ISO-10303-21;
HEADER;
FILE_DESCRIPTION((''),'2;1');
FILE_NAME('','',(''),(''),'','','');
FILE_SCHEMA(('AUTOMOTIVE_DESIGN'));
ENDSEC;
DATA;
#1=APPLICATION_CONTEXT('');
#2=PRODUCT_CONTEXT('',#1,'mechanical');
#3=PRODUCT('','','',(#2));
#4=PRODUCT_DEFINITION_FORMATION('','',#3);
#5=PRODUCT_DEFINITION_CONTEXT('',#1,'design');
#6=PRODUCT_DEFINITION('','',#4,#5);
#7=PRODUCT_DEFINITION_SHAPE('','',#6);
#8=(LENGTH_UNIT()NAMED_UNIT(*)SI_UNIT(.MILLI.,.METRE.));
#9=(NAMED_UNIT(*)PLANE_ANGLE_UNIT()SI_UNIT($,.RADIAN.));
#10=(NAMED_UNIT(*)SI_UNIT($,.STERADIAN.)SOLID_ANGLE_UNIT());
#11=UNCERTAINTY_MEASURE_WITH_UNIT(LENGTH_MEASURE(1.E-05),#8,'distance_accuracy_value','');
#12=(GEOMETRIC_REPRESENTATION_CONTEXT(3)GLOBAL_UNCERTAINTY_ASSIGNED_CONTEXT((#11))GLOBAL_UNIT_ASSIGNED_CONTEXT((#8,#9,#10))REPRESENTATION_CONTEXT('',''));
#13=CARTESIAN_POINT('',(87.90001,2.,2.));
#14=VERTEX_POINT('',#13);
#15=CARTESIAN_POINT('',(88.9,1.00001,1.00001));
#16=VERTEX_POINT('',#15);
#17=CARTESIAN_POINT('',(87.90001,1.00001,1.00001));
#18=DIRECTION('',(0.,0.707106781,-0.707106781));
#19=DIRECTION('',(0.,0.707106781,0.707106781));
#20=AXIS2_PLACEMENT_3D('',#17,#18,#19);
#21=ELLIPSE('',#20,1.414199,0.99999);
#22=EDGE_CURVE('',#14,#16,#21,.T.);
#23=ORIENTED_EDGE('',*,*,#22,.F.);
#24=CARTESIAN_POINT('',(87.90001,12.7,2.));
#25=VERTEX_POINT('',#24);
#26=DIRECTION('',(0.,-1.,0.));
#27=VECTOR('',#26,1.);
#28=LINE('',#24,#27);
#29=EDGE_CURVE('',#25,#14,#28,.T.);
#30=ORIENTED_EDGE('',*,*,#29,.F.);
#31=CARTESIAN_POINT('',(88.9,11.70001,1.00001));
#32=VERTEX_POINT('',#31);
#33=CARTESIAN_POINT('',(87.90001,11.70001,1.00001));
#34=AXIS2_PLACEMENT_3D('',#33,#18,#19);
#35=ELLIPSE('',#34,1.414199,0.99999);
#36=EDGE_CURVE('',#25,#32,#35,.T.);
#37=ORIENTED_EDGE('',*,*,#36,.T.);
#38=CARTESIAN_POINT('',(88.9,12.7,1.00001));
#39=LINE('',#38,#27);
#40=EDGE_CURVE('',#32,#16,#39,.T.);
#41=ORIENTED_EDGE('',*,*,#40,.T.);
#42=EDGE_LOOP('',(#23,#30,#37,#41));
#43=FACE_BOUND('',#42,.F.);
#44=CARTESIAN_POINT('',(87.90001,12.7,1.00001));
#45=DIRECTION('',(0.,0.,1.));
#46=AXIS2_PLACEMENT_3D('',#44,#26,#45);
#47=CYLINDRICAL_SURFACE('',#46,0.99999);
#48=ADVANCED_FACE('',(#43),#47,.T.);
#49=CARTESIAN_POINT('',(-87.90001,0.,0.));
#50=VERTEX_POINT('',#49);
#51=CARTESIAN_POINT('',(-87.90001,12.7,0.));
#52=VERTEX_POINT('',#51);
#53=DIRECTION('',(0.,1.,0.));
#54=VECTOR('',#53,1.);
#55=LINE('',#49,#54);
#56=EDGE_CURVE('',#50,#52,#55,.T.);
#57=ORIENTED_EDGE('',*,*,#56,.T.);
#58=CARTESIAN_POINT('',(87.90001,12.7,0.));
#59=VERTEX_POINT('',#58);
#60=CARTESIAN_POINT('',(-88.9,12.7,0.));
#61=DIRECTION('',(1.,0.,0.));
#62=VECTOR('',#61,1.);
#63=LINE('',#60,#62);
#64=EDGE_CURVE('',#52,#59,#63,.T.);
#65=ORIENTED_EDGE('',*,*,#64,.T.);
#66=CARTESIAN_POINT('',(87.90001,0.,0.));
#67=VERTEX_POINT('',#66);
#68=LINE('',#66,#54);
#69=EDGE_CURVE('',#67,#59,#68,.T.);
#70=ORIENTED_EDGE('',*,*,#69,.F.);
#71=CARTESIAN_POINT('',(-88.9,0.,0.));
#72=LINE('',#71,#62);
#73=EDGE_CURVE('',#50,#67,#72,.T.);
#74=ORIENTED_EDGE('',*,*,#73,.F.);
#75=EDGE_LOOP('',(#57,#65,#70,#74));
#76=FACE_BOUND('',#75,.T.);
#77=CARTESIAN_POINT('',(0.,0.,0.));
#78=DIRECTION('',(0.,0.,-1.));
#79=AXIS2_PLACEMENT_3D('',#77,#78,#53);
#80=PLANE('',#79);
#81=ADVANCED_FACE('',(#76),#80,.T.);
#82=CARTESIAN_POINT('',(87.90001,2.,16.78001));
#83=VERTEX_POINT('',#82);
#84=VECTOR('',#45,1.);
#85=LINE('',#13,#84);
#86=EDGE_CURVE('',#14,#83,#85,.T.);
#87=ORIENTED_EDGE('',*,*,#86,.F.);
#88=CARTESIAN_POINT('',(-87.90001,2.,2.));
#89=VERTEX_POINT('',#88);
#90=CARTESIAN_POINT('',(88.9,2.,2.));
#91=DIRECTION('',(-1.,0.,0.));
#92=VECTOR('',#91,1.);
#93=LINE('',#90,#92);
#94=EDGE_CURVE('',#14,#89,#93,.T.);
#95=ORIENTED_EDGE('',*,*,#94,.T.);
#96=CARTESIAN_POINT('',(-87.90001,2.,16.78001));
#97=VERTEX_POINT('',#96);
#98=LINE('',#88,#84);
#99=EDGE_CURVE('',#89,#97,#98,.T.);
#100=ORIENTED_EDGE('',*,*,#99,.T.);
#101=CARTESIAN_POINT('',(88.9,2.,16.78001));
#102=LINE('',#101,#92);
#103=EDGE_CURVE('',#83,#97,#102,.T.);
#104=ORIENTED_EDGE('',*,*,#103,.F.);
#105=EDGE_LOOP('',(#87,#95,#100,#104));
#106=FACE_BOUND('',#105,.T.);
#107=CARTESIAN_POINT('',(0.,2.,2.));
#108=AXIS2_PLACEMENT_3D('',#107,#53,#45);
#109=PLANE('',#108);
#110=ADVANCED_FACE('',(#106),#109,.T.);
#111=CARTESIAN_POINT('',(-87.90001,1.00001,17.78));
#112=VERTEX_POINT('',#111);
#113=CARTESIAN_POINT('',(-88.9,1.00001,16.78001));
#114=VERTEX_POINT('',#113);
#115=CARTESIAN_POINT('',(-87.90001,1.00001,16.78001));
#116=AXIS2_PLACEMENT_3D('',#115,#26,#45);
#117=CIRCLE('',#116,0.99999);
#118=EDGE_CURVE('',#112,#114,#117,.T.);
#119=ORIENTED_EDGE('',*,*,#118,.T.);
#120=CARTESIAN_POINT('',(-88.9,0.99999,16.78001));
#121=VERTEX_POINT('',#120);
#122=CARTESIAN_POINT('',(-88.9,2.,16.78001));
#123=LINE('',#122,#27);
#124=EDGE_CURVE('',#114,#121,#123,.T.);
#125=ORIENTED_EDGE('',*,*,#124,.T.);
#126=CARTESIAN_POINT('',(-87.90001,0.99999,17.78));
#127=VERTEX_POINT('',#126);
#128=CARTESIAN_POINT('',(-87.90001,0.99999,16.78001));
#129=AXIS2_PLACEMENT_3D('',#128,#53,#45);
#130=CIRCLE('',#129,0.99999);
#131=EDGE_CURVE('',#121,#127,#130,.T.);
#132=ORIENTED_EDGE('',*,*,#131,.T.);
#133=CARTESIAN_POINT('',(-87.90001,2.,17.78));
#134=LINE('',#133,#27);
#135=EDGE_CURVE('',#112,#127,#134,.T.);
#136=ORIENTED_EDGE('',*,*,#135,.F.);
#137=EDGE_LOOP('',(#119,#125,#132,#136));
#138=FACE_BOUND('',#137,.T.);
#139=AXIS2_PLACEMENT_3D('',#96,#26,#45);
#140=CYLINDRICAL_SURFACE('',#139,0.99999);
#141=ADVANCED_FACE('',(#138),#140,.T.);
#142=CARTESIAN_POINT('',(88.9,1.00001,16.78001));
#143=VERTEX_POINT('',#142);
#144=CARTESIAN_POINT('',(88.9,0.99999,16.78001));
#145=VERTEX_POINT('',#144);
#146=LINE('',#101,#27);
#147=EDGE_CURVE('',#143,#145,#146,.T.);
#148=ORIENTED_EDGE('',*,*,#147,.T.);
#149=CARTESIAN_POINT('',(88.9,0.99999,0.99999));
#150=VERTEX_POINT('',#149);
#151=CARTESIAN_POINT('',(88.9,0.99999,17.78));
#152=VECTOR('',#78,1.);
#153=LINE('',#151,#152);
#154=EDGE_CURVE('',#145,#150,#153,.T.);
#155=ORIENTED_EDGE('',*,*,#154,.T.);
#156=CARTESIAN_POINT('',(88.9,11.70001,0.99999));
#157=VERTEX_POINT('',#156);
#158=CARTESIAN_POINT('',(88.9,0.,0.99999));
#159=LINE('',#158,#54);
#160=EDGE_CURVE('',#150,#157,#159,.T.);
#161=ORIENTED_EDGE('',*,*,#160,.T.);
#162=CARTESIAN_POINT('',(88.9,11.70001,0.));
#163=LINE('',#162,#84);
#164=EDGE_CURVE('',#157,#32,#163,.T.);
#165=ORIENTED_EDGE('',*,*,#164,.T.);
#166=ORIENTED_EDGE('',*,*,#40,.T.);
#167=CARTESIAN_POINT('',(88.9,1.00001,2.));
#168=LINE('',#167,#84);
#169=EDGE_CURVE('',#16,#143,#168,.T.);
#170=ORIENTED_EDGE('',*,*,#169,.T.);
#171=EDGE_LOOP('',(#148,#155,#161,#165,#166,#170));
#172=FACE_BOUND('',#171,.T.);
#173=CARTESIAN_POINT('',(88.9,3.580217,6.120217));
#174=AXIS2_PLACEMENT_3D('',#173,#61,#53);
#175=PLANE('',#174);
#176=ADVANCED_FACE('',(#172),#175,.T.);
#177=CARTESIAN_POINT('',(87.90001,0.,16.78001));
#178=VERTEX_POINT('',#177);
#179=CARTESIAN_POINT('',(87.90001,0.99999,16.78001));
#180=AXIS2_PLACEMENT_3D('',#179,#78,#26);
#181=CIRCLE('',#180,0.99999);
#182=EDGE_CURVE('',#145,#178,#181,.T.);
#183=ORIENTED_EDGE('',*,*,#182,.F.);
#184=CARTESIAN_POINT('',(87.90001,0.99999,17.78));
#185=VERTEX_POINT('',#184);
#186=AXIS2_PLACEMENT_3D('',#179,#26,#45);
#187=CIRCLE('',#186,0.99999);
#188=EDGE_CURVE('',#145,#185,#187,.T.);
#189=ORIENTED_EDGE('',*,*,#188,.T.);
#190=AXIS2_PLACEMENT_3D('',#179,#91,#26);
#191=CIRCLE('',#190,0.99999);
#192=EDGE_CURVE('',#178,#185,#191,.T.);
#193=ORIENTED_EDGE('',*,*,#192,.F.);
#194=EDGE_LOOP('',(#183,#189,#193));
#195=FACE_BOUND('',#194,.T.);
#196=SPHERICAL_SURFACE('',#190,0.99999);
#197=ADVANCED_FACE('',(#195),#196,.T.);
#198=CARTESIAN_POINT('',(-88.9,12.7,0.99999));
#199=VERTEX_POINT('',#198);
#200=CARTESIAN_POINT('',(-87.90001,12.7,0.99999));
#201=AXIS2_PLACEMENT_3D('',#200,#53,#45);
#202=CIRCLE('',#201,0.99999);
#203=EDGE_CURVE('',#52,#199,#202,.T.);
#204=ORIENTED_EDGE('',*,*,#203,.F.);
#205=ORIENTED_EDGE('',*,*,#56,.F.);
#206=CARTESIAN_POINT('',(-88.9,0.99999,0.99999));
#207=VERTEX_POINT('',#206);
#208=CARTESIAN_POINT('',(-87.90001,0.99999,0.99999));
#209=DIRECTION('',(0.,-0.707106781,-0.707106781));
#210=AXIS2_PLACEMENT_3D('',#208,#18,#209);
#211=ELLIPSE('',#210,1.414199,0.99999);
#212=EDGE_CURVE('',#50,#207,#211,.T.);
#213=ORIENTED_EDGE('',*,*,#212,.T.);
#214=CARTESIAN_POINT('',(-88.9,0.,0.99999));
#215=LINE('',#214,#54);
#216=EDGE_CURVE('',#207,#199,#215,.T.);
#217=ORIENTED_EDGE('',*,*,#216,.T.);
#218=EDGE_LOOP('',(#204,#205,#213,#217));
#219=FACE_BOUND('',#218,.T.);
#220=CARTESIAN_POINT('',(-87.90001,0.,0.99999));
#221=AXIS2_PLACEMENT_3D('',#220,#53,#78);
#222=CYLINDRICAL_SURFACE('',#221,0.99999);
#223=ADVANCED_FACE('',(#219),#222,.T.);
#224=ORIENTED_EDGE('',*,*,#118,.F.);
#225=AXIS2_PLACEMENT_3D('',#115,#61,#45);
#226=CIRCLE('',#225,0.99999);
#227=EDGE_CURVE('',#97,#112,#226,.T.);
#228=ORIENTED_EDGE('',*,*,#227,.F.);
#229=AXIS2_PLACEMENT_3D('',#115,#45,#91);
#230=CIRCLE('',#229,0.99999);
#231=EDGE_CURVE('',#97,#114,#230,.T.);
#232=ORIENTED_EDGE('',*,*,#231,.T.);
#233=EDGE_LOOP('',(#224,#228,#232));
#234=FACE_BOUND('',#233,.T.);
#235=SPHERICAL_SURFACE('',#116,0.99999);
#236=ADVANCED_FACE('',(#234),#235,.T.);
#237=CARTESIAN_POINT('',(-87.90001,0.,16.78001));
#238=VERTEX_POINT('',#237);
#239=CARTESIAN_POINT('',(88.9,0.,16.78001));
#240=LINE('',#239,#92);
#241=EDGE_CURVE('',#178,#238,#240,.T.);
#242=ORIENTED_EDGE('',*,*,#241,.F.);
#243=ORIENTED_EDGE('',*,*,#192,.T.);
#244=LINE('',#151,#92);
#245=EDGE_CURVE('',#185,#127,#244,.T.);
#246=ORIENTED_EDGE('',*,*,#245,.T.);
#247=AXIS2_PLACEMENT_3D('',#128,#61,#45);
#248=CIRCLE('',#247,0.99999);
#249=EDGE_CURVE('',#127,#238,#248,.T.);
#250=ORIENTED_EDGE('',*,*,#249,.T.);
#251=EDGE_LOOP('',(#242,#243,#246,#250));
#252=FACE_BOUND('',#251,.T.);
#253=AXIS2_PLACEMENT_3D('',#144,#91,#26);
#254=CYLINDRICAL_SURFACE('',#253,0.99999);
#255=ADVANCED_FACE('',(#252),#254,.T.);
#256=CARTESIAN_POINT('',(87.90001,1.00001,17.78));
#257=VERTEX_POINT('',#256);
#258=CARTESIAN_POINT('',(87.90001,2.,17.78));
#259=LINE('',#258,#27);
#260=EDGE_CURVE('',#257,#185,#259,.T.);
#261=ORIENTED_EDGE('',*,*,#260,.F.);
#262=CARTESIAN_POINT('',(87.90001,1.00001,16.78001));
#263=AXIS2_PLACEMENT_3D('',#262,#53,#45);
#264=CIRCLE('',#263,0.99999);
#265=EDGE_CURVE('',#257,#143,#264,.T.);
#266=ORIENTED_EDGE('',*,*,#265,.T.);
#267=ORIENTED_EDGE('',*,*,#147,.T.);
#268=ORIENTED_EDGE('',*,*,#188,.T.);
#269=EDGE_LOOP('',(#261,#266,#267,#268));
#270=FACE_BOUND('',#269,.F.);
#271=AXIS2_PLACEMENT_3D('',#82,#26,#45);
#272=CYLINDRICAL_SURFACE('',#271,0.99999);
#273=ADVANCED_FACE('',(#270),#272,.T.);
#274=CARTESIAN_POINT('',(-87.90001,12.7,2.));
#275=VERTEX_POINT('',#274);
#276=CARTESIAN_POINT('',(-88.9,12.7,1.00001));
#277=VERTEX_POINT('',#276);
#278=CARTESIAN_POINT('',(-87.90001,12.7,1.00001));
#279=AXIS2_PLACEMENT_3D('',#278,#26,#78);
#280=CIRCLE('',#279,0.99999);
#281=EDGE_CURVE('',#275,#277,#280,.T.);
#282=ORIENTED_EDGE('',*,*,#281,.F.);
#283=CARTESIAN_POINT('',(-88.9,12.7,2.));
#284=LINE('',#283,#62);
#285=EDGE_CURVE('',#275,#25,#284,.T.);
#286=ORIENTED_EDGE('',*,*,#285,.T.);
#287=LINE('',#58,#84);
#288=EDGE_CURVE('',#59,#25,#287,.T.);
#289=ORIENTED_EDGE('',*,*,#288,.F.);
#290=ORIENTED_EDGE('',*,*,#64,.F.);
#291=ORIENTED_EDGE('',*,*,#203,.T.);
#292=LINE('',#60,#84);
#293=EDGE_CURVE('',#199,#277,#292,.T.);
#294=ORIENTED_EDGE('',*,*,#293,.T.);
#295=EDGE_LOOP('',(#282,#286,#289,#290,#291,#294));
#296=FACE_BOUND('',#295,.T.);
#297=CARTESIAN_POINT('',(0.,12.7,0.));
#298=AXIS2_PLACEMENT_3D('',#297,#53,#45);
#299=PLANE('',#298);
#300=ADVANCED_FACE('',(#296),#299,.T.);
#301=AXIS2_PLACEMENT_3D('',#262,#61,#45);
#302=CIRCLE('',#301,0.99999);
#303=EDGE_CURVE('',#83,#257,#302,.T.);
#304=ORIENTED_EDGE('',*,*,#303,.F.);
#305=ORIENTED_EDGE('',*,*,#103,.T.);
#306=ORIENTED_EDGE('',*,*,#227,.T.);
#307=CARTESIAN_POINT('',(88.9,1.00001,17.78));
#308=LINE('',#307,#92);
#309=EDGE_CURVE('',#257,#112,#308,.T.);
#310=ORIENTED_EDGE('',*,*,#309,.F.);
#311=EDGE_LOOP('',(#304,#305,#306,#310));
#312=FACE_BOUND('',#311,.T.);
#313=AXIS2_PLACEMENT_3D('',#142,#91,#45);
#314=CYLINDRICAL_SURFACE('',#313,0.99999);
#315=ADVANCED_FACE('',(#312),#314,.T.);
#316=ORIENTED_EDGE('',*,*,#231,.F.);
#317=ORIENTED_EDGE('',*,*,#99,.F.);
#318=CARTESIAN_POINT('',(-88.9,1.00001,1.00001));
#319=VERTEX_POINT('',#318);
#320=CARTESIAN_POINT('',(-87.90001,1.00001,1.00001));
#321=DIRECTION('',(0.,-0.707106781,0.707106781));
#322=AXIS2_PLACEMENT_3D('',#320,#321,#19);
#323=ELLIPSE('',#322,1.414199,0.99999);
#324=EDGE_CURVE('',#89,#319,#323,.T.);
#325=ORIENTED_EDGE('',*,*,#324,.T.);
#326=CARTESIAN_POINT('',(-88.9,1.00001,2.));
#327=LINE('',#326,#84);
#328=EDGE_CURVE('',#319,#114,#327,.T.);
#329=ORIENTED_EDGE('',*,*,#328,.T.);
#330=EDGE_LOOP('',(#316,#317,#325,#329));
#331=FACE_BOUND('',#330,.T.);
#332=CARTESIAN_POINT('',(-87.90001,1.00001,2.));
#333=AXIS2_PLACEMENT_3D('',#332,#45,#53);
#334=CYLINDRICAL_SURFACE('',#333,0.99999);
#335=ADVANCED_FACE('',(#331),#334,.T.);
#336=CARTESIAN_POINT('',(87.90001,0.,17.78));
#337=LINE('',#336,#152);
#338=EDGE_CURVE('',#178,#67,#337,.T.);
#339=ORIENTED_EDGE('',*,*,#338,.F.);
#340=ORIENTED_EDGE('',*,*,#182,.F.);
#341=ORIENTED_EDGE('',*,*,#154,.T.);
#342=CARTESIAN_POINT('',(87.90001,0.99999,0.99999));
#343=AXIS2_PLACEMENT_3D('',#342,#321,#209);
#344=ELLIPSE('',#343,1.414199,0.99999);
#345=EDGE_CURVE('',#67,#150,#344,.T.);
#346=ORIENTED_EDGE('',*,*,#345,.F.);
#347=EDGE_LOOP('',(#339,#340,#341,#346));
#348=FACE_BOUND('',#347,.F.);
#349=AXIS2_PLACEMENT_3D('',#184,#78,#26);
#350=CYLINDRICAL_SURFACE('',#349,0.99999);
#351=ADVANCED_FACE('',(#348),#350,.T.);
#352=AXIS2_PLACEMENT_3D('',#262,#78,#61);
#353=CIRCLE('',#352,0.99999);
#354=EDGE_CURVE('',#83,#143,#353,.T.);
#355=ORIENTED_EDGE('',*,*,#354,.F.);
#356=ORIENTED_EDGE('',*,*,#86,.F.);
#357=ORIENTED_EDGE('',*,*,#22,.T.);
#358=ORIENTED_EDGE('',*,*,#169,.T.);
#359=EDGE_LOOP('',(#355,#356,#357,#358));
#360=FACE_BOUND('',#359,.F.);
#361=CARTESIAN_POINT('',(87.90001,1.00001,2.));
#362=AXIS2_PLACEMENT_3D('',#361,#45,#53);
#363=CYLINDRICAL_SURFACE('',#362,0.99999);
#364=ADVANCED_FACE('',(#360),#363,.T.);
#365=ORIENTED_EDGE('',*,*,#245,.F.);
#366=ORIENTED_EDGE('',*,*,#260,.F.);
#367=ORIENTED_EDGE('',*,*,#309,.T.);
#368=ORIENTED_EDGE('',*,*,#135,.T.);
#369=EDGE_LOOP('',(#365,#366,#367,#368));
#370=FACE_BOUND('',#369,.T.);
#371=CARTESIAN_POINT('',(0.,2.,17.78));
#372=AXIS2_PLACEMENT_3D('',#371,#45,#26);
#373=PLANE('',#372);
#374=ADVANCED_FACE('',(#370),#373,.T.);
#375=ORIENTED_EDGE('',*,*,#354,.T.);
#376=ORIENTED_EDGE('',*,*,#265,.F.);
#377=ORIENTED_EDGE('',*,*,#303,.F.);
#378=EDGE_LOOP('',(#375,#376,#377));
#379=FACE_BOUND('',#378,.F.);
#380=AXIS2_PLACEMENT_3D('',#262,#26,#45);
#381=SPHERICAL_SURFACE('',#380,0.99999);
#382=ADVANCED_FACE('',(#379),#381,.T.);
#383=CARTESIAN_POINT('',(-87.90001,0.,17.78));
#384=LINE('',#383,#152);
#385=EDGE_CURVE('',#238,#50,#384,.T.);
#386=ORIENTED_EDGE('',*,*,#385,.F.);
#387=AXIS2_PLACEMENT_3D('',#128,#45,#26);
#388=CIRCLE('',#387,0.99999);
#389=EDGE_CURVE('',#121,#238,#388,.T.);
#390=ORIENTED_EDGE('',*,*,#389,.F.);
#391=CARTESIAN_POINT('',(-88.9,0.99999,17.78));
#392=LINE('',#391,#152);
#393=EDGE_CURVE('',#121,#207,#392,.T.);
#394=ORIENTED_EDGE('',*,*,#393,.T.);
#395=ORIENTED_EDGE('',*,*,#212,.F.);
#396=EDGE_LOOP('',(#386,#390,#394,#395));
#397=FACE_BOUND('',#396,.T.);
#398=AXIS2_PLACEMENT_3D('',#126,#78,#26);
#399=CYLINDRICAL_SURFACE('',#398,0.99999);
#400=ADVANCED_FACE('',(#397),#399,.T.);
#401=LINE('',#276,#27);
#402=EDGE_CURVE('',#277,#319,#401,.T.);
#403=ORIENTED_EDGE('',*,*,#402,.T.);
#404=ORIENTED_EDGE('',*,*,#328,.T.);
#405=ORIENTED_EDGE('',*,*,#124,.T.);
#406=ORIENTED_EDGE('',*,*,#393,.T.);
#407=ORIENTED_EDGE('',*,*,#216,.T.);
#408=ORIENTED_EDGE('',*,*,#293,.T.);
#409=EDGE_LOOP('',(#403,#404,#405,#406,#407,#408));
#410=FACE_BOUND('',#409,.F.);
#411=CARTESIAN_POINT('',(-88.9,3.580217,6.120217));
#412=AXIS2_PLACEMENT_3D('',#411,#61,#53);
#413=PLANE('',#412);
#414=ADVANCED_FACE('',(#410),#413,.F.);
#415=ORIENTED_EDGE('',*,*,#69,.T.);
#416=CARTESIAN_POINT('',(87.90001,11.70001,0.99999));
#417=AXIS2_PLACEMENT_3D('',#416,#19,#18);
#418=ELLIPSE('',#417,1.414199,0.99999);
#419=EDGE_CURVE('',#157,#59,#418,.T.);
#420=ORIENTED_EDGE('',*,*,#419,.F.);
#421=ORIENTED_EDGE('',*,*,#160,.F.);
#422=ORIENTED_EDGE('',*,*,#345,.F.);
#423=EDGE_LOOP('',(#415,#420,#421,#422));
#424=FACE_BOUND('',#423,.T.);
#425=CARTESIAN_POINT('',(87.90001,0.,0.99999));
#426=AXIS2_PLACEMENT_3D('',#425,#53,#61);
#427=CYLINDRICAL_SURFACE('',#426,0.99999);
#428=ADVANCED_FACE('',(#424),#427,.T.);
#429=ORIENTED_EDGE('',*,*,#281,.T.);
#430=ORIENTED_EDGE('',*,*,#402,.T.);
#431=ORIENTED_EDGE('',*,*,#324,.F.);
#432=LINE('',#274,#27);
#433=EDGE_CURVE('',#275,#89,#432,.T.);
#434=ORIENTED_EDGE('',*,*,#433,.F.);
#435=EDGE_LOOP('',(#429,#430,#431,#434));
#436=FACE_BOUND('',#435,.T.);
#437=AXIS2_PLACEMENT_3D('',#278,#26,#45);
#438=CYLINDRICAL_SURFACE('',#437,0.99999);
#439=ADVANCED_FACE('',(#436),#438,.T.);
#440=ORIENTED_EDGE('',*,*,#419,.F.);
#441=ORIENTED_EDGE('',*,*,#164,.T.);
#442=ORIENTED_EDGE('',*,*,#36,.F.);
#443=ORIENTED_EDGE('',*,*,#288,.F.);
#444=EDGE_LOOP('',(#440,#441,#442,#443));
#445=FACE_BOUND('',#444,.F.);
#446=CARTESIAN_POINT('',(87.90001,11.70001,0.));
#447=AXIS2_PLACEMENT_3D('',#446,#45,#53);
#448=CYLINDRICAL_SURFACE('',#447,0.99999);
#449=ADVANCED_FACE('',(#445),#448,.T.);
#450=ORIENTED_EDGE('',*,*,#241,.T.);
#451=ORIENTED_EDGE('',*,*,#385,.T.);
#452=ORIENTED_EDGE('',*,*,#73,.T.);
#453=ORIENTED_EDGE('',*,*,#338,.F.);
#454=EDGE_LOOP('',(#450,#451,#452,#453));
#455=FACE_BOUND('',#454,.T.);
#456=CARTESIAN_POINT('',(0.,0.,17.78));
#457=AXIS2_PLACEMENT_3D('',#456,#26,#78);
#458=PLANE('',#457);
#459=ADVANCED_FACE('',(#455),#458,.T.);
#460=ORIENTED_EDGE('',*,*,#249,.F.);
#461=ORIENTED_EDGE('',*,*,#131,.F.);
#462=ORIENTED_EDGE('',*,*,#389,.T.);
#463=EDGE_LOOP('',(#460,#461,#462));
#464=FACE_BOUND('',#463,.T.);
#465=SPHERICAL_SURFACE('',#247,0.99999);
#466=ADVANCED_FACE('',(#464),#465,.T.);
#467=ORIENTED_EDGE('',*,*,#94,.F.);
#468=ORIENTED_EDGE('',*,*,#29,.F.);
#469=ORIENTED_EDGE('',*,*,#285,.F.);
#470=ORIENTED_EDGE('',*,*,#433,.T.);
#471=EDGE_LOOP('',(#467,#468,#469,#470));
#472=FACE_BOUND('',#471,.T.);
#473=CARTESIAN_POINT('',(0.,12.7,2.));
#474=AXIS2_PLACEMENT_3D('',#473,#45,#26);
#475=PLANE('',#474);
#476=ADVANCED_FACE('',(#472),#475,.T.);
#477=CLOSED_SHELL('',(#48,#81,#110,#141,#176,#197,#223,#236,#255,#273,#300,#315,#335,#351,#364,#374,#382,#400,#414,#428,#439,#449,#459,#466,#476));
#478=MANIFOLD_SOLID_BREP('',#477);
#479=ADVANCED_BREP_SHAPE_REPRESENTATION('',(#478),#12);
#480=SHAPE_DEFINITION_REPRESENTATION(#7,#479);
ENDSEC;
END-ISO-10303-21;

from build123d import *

# Parameters (mm, degrees)
F1_DEPTH = 88.9
F2_R     = 0.99999


# Not quite as in the source:
# - a fillet or chamfer is up to 0.001 mm smaller than in the source, because OpenCascade refuses the exact size


with BuildPart() as f1:
    # F0 (on Right) → F1 (new body, symmetric)
    with BuildSketch(Plane.YZ):
        Polygon((0, 17.78), (0, 0), (12.7, 0), (12.7, 2), (2, 2), (2, 17.78), align=None)
    extrude(amount=F1_DEPTH, both=True)

    # F2 (radius 1 in the source; OpenCascade refuses exactly that, so slightly less here)
    f2_edges = [f1.edges().sort_by_distance(p)[0] for p in [
        (0, 0, 17.78),
        (88.9, 0, 8.89),
        (-88.9, 1, 17.78),
        (88.9, 1, 17.78),
        (0, 2, 17.78),
        (88.9, 2, 9.89),
        (88.9, 6.35, 0),
        (88.9, 12.7, 1),
        (88.9, 7.35, 2),
        (-88.9, 0, 8.89),
        (-88.9, 2, 9.89),
        (-88.9, 7.35, 2),
        (-88.9, 6.35, 0),
    ]]
    fillet(f2_edges, radius=F2_R)


solid = f1.part
